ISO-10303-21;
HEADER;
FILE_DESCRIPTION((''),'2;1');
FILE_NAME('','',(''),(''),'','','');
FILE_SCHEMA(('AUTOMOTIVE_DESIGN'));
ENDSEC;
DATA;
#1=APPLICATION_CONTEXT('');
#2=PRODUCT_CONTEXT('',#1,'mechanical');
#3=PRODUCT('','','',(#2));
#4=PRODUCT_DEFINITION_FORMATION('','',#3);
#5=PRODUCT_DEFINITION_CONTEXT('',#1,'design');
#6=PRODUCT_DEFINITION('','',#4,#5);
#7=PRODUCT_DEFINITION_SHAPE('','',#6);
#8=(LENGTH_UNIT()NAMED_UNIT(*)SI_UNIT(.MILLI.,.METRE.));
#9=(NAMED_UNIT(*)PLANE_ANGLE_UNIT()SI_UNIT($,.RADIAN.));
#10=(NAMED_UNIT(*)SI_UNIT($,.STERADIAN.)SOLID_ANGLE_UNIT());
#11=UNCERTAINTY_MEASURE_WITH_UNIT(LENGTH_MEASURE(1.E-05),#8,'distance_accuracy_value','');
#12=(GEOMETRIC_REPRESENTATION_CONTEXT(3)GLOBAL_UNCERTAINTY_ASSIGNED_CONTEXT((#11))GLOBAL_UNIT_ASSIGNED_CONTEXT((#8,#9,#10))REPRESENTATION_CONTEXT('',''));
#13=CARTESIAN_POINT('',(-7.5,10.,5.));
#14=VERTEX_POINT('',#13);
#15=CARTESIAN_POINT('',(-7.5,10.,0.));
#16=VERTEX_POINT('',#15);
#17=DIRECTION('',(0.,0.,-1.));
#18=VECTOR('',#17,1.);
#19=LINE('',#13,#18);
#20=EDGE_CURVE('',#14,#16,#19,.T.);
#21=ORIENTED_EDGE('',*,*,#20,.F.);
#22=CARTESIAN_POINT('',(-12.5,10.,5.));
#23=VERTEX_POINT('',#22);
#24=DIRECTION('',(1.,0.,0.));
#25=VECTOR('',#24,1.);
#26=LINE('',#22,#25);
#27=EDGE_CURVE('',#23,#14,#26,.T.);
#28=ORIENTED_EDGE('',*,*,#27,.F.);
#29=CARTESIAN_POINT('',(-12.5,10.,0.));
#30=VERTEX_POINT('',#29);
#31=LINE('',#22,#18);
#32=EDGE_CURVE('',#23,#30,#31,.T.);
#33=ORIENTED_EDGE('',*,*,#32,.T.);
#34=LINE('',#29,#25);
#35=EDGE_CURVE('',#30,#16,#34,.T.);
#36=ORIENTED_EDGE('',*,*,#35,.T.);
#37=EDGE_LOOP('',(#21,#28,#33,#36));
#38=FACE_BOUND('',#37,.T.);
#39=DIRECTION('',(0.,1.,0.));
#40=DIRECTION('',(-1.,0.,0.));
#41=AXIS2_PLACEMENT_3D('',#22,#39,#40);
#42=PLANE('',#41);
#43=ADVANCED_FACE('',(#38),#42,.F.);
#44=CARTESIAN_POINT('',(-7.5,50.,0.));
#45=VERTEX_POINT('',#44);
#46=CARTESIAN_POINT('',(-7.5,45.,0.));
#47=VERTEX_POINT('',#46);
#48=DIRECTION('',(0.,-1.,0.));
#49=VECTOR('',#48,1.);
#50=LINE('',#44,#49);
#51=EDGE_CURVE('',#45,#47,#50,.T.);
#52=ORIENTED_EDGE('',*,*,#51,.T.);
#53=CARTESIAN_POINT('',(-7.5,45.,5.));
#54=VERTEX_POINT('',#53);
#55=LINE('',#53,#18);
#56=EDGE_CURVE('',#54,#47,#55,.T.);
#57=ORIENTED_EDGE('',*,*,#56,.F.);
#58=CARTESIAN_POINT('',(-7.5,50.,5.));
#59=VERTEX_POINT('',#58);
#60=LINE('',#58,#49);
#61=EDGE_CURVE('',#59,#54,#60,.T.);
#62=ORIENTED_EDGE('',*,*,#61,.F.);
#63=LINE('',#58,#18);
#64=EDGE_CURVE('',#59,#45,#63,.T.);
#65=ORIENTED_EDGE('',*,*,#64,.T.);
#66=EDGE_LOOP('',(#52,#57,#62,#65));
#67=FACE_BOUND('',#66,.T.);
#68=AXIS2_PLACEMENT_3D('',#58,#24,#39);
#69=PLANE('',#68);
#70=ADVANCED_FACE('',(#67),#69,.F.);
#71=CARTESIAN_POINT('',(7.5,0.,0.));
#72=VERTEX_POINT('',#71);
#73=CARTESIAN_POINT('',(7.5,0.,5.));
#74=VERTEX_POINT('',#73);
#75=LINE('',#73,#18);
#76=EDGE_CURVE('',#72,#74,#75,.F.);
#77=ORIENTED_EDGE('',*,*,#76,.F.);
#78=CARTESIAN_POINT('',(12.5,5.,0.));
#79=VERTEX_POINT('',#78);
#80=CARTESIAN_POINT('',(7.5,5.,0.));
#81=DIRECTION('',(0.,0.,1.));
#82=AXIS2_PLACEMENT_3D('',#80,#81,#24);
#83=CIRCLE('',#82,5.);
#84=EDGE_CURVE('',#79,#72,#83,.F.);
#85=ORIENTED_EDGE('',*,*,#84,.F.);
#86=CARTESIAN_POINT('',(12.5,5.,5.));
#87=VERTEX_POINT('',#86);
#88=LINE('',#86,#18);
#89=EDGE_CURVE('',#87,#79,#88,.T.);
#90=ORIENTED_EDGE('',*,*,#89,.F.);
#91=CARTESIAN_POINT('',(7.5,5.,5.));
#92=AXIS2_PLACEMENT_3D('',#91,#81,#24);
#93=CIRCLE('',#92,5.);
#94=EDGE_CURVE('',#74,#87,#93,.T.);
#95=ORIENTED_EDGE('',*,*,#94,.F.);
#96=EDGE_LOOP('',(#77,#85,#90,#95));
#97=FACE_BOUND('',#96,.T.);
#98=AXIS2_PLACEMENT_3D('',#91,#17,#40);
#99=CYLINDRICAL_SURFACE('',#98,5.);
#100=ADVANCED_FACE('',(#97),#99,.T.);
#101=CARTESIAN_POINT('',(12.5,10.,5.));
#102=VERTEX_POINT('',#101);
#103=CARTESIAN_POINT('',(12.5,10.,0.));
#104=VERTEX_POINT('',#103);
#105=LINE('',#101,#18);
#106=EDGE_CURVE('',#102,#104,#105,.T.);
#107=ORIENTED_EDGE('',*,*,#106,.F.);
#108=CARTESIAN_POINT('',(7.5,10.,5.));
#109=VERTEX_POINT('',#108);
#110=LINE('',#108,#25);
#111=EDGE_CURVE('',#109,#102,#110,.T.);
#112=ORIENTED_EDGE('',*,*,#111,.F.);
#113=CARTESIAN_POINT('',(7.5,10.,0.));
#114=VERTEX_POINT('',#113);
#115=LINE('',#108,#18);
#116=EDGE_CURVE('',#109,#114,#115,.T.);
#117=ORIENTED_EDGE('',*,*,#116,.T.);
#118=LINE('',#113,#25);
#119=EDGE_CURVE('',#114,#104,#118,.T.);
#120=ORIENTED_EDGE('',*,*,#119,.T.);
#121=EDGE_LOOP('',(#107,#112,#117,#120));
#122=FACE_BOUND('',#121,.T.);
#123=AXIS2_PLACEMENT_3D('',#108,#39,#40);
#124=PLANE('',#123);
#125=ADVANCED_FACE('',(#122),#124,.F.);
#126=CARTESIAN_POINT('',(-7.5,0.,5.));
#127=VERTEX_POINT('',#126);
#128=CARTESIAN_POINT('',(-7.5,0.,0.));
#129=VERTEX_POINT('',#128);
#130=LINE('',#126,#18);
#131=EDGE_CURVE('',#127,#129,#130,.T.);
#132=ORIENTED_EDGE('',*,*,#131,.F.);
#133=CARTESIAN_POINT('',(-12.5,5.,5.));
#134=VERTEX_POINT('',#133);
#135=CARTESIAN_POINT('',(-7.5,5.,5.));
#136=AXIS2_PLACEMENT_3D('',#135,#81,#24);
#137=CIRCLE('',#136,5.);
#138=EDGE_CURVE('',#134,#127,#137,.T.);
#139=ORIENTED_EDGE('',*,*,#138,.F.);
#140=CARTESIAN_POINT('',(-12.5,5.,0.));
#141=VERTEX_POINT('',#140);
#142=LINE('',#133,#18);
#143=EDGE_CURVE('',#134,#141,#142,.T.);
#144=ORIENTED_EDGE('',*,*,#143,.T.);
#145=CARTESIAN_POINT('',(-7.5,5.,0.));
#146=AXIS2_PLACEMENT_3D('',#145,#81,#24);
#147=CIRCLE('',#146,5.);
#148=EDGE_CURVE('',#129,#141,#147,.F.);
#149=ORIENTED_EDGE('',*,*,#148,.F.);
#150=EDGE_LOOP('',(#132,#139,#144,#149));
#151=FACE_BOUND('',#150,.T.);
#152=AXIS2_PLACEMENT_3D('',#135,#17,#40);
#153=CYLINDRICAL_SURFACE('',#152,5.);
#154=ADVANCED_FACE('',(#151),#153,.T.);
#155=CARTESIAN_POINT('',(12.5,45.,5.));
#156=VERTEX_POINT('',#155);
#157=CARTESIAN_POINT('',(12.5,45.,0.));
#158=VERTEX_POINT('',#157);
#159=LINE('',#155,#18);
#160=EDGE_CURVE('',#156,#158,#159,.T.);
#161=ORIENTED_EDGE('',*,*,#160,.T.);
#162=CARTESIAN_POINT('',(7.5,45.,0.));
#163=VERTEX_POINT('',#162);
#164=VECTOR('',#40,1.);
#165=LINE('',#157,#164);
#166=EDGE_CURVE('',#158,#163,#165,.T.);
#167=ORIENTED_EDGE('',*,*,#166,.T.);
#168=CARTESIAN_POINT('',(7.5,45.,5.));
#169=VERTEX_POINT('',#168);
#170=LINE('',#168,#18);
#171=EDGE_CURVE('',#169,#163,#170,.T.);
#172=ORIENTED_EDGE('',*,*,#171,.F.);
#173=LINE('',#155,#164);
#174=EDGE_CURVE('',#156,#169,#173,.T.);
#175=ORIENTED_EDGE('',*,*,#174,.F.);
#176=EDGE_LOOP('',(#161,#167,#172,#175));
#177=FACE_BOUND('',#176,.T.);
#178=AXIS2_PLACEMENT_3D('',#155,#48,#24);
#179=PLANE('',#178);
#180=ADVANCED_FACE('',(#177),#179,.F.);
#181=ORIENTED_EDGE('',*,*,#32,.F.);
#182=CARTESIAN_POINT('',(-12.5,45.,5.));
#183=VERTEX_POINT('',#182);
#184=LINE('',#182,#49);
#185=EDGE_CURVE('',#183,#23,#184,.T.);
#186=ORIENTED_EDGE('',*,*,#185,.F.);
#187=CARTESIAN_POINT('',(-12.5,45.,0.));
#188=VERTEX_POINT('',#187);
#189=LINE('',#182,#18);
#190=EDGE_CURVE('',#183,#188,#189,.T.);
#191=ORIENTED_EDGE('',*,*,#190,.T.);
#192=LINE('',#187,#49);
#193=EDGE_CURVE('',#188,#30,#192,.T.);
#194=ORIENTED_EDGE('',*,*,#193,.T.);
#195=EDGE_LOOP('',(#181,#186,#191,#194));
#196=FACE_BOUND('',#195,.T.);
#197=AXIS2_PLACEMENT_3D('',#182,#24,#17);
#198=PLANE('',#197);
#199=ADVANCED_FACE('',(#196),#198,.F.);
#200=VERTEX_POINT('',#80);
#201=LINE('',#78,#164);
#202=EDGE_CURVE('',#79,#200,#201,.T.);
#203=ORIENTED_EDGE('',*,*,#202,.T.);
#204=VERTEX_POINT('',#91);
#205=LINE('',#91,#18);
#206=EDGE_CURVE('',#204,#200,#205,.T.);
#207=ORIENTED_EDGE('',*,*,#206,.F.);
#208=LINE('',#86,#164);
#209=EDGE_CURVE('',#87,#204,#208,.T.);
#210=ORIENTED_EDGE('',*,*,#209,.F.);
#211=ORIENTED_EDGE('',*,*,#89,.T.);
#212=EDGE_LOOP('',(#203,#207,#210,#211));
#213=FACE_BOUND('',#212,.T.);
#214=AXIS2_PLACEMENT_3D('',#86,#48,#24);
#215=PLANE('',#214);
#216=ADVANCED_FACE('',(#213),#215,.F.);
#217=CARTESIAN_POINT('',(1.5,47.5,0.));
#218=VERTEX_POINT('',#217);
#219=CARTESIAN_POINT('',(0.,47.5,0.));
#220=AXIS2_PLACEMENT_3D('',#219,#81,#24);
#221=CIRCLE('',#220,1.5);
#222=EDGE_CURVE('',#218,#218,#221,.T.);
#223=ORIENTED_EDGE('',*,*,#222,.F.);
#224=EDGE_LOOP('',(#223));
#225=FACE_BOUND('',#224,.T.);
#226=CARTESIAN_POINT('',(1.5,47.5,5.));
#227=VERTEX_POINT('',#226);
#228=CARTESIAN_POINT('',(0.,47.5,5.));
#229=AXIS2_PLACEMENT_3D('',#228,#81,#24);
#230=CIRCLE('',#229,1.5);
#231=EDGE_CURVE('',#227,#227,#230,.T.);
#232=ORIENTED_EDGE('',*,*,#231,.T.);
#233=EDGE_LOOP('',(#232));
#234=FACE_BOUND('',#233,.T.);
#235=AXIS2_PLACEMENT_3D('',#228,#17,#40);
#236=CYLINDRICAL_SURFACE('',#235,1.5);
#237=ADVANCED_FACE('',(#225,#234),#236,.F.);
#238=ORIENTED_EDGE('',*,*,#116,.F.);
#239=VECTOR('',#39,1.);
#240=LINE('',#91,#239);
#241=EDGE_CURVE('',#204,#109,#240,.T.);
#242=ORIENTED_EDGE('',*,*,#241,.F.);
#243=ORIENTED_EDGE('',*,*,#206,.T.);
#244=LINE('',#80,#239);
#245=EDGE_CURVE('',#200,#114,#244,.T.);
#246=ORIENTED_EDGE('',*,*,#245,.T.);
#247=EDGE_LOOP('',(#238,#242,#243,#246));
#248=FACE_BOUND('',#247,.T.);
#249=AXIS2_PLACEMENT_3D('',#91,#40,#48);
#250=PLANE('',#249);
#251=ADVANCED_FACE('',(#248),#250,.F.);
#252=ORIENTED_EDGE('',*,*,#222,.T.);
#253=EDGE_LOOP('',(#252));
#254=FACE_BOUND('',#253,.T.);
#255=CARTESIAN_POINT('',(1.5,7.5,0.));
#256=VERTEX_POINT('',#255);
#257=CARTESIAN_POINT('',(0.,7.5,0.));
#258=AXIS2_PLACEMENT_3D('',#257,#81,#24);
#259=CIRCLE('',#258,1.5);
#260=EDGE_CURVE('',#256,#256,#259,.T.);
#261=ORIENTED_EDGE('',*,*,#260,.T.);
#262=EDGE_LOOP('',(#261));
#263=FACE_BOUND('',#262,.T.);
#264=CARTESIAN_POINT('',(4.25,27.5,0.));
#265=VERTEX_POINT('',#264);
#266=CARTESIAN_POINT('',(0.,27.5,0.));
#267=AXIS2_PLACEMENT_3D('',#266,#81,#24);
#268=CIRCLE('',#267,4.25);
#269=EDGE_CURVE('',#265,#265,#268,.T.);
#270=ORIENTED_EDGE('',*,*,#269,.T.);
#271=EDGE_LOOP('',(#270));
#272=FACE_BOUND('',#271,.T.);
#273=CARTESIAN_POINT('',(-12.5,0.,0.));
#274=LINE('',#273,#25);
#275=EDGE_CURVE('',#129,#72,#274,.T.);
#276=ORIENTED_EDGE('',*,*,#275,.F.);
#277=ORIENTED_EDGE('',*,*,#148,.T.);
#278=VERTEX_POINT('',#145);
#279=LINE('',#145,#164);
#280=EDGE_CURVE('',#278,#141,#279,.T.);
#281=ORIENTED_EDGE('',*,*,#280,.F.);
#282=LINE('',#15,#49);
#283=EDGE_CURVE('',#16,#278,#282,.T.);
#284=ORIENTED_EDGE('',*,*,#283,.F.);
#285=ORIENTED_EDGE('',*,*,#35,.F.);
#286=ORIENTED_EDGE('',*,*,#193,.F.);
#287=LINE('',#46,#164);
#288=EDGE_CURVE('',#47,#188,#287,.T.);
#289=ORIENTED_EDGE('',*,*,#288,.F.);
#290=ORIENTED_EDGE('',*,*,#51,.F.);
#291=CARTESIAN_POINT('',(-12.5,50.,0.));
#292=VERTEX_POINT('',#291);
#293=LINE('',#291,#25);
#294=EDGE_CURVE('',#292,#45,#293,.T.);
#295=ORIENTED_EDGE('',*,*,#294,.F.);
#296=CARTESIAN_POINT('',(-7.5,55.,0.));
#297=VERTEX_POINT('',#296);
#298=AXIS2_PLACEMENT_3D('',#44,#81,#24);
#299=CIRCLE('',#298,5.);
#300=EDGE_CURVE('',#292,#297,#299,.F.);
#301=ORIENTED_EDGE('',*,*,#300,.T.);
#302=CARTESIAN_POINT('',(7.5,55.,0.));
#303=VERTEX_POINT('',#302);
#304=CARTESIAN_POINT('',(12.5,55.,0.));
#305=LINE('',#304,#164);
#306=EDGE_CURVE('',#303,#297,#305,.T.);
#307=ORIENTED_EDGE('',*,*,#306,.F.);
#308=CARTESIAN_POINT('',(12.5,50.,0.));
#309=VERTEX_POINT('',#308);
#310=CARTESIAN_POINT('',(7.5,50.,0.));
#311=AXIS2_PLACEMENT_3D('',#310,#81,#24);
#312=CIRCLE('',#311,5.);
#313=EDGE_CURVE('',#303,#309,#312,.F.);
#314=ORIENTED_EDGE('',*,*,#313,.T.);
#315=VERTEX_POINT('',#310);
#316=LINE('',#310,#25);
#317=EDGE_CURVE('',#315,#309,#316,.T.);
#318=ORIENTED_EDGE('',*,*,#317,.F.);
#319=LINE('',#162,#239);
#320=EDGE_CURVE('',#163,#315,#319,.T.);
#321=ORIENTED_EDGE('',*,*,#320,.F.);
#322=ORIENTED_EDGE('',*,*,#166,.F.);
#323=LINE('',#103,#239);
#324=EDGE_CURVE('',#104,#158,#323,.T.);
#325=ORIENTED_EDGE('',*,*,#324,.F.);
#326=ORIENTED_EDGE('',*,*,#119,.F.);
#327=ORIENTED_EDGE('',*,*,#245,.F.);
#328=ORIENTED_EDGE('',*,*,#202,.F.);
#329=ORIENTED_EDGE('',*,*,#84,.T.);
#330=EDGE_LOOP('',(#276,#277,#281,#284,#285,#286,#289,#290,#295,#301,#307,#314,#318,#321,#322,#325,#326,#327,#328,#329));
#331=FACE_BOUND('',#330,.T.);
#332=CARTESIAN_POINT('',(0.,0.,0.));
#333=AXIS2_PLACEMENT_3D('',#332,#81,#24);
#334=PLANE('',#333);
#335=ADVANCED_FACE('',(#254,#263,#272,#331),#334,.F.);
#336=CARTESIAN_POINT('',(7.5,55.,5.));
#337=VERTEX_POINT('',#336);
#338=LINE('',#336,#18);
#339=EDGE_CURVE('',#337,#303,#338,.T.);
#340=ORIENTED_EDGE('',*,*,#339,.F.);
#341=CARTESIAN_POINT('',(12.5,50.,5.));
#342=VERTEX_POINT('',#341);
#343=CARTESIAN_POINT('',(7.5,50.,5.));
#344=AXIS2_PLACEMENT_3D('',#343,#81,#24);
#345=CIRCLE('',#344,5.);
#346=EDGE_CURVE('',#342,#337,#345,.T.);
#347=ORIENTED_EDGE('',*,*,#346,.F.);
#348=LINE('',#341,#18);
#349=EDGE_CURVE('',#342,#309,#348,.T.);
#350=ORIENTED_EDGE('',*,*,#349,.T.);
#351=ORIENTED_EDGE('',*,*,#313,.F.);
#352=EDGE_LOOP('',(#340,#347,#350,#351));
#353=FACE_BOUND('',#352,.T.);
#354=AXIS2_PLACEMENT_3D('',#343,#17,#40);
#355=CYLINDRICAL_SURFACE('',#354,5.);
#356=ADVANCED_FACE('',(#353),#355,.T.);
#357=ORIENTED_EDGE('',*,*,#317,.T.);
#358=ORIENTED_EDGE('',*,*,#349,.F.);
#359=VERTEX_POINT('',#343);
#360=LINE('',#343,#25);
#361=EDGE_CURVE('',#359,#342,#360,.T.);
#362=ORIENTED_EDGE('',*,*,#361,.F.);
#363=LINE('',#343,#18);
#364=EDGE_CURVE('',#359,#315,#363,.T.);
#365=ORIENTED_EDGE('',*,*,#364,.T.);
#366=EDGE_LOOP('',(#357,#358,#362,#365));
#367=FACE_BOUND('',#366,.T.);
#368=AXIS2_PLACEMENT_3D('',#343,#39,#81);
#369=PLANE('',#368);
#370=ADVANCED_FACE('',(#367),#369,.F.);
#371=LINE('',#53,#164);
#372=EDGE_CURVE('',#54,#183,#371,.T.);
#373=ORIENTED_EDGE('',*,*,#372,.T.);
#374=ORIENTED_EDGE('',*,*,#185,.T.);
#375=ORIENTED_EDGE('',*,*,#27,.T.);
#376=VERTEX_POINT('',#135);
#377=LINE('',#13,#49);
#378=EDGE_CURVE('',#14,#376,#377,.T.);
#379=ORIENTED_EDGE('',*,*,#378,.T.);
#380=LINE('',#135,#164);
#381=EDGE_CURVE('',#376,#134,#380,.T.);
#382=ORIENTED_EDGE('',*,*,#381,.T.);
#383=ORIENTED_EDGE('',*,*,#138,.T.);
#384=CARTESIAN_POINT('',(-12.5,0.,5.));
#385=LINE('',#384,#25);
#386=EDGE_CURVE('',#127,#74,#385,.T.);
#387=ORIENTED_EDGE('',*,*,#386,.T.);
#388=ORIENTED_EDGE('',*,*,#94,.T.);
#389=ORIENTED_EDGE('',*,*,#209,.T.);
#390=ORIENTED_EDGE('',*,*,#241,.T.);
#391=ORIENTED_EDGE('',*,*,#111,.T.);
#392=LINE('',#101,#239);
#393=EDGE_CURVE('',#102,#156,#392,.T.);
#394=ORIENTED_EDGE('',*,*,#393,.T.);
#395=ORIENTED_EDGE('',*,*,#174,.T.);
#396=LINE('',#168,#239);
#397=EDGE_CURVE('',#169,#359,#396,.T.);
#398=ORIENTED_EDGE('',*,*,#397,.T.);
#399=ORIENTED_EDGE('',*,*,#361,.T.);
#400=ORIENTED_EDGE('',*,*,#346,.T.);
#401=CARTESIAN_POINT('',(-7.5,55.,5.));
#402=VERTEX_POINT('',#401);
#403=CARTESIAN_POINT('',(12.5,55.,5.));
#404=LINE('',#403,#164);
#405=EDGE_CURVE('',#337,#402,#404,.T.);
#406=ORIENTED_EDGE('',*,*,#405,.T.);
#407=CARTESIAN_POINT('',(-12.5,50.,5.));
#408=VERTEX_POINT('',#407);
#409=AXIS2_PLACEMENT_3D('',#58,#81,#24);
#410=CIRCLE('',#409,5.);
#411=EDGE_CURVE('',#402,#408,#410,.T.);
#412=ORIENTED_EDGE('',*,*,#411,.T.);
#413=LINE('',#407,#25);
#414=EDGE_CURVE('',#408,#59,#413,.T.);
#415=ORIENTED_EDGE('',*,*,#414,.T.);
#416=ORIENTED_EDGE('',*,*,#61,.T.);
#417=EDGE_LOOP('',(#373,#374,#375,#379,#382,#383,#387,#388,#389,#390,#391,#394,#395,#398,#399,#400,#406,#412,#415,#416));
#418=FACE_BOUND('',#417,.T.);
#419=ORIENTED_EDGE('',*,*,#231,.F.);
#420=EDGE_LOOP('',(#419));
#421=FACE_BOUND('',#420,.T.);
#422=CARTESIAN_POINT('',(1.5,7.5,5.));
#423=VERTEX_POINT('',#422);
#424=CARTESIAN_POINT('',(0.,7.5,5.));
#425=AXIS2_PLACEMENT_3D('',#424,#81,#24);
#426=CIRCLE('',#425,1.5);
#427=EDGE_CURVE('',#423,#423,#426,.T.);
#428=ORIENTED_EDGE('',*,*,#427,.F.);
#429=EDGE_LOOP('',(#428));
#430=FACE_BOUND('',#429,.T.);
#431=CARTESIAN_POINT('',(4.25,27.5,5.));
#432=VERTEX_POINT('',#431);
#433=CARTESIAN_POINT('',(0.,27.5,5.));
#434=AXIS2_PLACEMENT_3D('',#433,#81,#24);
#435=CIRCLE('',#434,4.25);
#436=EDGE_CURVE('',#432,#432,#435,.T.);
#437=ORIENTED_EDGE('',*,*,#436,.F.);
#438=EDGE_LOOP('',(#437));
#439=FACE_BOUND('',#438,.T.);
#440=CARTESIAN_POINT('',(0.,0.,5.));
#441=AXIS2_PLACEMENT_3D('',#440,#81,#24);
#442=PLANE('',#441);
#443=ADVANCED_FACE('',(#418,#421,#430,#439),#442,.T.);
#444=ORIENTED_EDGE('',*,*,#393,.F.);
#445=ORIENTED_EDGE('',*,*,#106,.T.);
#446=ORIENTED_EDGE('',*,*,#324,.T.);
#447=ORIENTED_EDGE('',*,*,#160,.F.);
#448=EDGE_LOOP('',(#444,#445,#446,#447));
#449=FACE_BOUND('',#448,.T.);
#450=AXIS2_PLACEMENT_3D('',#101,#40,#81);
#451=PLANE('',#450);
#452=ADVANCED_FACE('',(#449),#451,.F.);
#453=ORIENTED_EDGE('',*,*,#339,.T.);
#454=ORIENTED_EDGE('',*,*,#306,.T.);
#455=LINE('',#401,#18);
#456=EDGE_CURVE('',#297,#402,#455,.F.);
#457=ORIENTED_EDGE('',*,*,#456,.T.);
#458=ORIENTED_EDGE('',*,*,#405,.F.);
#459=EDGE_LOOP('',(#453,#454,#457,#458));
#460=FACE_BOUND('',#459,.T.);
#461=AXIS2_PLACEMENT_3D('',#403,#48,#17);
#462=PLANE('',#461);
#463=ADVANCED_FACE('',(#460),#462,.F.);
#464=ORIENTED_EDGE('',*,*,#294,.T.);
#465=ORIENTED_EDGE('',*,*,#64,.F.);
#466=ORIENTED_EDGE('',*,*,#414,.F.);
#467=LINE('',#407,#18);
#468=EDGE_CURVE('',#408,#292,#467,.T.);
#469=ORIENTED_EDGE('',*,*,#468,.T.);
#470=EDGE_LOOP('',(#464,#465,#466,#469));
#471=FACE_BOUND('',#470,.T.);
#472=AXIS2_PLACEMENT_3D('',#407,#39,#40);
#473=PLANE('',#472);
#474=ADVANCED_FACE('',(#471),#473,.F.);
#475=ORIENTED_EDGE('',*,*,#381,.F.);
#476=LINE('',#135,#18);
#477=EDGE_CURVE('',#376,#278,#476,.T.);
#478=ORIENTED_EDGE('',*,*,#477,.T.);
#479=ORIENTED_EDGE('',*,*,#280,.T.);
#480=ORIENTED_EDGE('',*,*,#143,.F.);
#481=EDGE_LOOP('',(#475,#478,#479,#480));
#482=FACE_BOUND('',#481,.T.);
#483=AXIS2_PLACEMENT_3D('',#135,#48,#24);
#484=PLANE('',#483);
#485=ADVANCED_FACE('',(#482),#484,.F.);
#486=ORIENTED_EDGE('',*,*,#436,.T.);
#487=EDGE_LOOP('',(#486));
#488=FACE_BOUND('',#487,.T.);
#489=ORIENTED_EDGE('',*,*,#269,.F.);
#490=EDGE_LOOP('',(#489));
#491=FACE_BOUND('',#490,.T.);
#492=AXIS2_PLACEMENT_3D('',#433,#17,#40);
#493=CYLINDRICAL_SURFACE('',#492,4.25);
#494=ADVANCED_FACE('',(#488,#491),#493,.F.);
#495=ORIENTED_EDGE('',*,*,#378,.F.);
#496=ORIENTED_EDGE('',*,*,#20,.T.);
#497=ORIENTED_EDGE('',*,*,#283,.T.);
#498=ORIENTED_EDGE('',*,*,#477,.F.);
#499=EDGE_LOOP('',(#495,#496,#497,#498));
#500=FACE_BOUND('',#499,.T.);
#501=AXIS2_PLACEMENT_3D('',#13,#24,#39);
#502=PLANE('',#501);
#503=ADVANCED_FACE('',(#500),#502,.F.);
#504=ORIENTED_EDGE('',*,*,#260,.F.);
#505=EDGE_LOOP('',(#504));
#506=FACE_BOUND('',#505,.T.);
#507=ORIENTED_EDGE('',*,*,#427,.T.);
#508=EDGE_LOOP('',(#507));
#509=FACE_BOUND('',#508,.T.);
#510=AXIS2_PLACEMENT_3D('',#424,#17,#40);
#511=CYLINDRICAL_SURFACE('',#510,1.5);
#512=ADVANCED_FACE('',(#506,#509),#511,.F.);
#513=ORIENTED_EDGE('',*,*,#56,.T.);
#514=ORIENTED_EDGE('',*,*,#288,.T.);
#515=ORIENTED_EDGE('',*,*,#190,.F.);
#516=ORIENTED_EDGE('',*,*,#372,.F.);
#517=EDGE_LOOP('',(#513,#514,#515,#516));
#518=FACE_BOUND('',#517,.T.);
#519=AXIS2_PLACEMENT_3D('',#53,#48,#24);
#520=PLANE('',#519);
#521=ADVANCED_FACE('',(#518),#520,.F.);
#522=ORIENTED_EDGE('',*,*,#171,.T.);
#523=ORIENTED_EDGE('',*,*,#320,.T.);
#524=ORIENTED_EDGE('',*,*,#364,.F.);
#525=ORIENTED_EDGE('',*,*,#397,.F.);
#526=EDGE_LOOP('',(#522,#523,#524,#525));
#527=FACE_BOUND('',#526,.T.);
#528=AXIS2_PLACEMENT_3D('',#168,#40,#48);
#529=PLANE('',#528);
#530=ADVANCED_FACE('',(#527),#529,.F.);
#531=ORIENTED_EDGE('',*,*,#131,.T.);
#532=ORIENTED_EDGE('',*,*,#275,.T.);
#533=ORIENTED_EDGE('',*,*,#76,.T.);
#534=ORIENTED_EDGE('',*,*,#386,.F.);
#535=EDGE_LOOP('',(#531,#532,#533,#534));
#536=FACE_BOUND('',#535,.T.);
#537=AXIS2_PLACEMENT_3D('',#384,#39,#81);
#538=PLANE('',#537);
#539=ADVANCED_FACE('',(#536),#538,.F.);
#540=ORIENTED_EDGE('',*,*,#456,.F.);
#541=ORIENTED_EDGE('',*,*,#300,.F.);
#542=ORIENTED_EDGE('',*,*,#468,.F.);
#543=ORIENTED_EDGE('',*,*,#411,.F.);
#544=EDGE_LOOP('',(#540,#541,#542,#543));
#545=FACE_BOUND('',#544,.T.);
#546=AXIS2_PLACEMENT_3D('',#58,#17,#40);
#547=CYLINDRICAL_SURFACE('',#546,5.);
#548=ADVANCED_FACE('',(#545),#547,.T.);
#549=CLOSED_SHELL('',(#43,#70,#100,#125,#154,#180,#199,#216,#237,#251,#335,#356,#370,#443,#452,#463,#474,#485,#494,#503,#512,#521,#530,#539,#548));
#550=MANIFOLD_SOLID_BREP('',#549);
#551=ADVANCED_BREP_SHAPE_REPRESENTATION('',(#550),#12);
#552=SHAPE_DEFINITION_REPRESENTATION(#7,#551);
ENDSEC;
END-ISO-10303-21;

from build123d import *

# Parameters (mm, degrees)
ESQUISSE1_R        = 1.5
ESQUISSE1_R_2      = 4.25
BOSS_EXTRU_1_DEPTH = 5
CONG_1_R           = 5


with BuildPart() as part:
    # Esquisse1 → Boss.-Extru.1 (new body)
    with BuildSketch(Plane.XY):
        Polygon((-12.5, 0), (12.5, 0), (12.5, 5), (7.5, 5), (7.5, 10), (12.5, 10), (12.5, 45), (7.5, 45), (7.5, 50), (12.5, 50), (12.5, 55), (-12.5, 55), (-12.5, 50), (-7.5, 50), (-7.5, 45), (-12.5, 45), (-12.5, 10), (-7.5, 10), (-7.5, 5), (-12.5, 5), align=None)
        with Locations((0, 47.5)):
            Circle(ESQUISSE1_R, mode=Mode.SUBTRACT)
        with Locations((0, 7.5)):
            Circle(ESQUISSE1_R, mode=Mode.SUBTRACT)
        with Locations((0, 27.5)):
            Circle(ESQUISSE1_R_2, mode=Mode.SUBTRACT)
    extrude(amount=BOSS_EXTRU_1_DEPTH)

    # Congé1
    cong_1_edges = [part.edges().sort_by_distance(p)[0] for p in [
        (12.5, 55, 2.5),
        (12.5, 0, 2.5),
        (-12.5, 0, 2.5),
        (-12.5, 55, 2.5),
    ]]
    fillet(cong_1_edges, radius=CONG_1_R - 0.0001)  # a hair under: the kernel refuses the full size


solid = part.part
